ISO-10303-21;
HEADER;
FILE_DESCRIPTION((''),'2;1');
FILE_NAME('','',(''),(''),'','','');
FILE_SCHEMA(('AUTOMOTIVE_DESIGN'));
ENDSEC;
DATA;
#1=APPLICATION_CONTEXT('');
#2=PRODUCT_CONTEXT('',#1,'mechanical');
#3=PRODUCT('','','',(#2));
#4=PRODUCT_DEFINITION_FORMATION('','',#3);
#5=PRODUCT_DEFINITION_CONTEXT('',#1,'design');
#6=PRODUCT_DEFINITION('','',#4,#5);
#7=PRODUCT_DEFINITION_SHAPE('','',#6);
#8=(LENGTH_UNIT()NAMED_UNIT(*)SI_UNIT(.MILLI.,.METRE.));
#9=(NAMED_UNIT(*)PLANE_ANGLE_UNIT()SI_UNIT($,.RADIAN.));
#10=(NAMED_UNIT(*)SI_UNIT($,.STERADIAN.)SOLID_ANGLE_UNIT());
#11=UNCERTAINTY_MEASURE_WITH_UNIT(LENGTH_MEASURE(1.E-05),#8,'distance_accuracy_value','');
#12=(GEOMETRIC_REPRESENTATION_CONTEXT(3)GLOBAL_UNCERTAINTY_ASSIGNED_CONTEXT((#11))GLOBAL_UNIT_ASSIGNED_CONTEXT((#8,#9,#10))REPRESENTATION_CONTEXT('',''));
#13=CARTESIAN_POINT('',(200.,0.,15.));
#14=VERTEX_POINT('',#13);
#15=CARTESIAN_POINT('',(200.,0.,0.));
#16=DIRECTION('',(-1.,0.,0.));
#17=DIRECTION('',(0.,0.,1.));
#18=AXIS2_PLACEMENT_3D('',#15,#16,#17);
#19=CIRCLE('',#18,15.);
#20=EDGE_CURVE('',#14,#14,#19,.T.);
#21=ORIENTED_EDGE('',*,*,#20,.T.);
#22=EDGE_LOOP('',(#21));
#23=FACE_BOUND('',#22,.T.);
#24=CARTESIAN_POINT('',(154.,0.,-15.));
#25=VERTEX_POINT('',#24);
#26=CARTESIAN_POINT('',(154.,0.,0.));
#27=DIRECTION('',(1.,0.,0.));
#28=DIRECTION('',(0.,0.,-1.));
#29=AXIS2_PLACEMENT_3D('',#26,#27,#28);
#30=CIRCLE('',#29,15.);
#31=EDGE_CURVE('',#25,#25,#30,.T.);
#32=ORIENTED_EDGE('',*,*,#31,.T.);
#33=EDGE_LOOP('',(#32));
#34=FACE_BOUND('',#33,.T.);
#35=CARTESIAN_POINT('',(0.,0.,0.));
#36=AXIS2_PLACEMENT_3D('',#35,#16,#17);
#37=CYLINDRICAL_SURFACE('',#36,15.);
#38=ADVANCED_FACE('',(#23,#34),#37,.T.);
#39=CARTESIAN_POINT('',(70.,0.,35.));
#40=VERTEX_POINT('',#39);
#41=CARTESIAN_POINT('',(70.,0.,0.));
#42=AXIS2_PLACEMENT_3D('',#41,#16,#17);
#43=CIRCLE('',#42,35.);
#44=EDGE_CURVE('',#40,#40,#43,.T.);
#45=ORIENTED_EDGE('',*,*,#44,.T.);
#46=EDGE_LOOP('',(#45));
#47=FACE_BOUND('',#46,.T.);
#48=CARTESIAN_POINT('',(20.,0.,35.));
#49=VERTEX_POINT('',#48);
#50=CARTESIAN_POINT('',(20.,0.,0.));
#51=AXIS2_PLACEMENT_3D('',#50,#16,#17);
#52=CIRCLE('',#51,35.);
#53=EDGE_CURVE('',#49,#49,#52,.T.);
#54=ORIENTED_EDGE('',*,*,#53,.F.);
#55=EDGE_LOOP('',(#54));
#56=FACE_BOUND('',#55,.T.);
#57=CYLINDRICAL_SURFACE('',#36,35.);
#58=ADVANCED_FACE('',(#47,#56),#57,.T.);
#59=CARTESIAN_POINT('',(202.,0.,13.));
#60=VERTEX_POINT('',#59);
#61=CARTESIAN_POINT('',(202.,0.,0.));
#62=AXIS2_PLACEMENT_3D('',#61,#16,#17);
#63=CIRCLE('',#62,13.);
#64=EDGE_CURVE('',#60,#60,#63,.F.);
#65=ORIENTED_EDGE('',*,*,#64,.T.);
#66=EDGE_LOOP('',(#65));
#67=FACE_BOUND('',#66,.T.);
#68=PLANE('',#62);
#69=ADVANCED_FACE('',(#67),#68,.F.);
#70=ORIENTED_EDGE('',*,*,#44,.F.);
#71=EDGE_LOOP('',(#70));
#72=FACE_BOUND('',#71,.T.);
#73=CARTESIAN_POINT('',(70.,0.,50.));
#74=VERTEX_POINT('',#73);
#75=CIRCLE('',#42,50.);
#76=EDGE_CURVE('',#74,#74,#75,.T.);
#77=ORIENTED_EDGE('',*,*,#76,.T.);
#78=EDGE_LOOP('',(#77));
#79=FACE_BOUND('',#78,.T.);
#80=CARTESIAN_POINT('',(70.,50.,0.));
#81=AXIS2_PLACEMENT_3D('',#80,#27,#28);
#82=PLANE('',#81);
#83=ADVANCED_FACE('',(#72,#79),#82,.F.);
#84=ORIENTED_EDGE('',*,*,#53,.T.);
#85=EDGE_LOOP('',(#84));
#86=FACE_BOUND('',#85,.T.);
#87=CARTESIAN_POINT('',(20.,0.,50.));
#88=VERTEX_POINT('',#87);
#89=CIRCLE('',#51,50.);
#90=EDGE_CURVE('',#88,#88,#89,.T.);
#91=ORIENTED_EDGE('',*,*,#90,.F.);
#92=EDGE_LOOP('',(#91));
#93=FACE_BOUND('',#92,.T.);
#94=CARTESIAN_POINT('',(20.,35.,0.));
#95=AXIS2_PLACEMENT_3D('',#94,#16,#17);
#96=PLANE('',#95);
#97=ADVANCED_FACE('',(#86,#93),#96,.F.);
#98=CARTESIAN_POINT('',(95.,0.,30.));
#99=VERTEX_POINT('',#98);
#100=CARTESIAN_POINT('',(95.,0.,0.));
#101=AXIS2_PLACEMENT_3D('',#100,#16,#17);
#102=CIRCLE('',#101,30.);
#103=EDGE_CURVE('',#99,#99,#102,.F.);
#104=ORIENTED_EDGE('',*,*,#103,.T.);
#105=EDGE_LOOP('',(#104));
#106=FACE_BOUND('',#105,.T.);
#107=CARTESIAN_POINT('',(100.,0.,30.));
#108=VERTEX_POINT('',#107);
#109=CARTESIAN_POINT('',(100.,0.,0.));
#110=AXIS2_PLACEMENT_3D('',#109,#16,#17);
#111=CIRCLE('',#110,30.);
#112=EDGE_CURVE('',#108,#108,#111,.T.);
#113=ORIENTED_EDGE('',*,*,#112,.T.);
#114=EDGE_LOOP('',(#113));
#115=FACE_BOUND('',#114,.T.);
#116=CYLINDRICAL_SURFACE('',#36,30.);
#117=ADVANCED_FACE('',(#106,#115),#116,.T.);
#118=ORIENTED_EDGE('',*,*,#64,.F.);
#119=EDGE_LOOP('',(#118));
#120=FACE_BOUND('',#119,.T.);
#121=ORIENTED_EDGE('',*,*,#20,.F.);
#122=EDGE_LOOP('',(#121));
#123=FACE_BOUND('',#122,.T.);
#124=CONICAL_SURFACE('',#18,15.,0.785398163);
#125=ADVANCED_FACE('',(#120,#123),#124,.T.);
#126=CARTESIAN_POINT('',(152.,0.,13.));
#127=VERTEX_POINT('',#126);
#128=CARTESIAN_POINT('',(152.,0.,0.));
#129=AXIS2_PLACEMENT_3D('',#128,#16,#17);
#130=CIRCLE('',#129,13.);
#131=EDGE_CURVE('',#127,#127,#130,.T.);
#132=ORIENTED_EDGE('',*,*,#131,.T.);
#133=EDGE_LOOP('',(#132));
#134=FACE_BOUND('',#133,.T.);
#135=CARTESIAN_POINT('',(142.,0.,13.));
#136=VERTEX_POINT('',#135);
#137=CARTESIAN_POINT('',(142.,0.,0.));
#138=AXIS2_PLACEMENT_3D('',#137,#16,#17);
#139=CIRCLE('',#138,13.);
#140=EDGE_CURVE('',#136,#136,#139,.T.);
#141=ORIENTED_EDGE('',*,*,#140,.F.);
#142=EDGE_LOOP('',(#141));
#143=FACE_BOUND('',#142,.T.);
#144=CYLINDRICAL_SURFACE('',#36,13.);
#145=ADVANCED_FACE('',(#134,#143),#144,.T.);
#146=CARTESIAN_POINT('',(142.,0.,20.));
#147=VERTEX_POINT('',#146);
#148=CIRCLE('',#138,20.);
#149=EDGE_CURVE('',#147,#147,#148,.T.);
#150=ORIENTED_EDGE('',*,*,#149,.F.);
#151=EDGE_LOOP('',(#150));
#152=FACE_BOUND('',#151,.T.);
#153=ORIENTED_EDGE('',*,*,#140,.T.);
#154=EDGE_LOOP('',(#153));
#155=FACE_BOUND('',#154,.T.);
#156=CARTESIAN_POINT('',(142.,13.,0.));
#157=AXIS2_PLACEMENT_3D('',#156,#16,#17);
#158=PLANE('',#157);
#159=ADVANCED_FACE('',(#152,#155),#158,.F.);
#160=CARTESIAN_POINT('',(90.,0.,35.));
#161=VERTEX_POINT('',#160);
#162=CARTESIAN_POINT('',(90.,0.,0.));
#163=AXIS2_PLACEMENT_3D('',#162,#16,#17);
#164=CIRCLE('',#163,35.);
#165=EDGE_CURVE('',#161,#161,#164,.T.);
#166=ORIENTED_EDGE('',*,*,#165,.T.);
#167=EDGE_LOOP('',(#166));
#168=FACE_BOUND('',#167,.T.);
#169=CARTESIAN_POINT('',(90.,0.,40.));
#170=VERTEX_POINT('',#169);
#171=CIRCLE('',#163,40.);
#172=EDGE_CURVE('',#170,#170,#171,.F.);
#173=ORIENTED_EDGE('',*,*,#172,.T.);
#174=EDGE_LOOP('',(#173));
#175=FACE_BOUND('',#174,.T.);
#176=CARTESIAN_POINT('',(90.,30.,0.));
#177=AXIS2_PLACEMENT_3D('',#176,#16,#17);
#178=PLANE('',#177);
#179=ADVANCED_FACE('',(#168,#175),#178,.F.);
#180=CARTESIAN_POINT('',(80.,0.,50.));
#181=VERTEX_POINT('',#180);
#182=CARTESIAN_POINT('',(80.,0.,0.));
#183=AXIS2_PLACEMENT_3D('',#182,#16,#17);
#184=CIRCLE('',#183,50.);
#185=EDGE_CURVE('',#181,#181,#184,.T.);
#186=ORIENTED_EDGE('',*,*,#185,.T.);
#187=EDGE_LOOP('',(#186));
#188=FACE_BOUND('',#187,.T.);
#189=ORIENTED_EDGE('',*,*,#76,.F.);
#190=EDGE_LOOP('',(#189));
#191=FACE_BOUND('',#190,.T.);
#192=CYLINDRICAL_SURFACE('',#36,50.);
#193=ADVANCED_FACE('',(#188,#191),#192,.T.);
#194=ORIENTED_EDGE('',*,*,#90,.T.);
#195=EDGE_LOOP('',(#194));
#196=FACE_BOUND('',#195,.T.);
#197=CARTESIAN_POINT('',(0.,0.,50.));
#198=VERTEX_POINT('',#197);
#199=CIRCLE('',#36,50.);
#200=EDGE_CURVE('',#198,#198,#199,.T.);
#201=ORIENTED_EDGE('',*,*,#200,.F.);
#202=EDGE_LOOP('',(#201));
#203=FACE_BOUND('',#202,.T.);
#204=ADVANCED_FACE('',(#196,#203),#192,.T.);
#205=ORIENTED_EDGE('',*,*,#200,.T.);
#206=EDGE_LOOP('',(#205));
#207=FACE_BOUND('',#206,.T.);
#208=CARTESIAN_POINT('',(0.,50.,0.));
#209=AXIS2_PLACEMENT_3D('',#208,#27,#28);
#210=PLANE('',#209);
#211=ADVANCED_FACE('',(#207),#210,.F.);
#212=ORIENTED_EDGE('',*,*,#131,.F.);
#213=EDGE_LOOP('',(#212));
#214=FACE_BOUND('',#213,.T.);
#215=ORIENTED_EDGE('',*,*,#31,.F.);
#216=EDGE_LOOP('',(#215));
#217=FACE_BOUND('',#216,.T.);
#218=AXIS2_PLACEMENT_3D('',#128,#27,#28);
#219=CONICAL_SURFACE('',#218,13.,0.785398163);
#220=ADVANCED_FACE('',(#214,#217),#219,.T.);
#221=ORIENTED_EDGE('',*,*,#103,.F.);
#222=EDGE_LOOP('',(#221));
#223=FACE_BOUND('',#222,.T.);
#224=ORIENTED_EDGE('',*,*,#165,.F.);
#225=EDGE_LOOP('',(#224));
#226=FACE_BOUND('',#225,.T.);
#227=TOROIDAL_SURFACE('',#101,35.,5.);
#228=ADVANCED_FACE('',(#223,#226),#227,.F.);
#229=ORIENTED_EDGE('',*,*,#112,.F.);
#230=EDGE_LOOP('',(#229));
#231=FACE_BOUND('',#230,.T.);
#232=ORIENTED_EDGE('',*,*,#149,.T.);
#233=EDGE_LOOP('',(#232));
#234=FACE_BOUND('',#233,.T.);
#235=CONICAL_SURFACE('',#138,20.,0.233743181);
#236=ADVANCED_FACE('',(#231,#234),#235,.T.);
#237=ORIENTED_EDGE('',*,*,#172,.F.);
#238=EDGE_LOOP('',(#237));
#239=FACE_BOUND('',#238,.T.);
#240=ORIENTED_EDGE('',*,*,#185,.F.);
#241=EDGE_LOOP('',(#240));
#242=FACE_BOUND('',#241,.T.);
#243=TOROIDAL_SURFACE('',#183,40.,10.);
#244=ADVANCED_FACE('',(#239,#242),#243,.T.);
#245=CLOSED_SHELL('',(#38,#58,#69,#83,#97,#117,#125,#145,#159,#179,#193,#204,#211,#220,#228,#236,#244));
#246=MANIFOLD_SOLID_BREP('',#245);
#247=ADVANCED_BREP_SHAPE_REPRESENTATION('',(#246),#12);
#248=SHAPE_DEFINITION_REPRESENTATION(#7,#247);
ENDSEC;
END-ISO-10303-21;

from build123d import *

# Parameters (mm, degrees)
FILLET1_R     = 5
FILLET2_R     = 10
CHAMFER1_SIZE = 2


with BuildPart() as part:
    # Sketch1 → Revolve1 (revolve)
    with BuildSketch(Plane.XY, mode=Mode.PRIVATE) as revolve1_sk:
        Polygon((0, 0), (202, 0), (202, 15), (152, 15), (152, 13), (142, 13), (142, 20), (100, 30), (90, 30), (90, 50), (70, 50), (70, 35), (20, 35), (20, 50), (0, 50), align=None)
    revolve(revolve1_sk.sketch.rotate(Axis((0, 0, 0), (1, 0, 0)), 90), axis=Axis((0, 0, 0), (1, 0, 0)))

    # Fillet1
    fillet1_edges = [part.edges().sort_by_distance(p)[0] for p in [
        (90, 0, -30),
    ]]
    fillet(fillet1_edges, radius=FILLET1_R)

    # Fillet2
    fillet2_edges = [part.edges().sort_by_distance(p)[0] for p in [
        (90, 0, -50),
    ]]
    fillet(fillet2_edges, radius=FILLET2_R)

    # Chamfer1
    chamfer1_edges = [part.edges().sort_by_distance(p)[0] for p in [
        (152, 0, -15),
        (202, 0, -15),
    ]]
    chamfer(chamfer1_edges, length=CHAMFER1_SIZE - 0.0001)  # a hair under: the kernel refuses the full size


solid = part.part
